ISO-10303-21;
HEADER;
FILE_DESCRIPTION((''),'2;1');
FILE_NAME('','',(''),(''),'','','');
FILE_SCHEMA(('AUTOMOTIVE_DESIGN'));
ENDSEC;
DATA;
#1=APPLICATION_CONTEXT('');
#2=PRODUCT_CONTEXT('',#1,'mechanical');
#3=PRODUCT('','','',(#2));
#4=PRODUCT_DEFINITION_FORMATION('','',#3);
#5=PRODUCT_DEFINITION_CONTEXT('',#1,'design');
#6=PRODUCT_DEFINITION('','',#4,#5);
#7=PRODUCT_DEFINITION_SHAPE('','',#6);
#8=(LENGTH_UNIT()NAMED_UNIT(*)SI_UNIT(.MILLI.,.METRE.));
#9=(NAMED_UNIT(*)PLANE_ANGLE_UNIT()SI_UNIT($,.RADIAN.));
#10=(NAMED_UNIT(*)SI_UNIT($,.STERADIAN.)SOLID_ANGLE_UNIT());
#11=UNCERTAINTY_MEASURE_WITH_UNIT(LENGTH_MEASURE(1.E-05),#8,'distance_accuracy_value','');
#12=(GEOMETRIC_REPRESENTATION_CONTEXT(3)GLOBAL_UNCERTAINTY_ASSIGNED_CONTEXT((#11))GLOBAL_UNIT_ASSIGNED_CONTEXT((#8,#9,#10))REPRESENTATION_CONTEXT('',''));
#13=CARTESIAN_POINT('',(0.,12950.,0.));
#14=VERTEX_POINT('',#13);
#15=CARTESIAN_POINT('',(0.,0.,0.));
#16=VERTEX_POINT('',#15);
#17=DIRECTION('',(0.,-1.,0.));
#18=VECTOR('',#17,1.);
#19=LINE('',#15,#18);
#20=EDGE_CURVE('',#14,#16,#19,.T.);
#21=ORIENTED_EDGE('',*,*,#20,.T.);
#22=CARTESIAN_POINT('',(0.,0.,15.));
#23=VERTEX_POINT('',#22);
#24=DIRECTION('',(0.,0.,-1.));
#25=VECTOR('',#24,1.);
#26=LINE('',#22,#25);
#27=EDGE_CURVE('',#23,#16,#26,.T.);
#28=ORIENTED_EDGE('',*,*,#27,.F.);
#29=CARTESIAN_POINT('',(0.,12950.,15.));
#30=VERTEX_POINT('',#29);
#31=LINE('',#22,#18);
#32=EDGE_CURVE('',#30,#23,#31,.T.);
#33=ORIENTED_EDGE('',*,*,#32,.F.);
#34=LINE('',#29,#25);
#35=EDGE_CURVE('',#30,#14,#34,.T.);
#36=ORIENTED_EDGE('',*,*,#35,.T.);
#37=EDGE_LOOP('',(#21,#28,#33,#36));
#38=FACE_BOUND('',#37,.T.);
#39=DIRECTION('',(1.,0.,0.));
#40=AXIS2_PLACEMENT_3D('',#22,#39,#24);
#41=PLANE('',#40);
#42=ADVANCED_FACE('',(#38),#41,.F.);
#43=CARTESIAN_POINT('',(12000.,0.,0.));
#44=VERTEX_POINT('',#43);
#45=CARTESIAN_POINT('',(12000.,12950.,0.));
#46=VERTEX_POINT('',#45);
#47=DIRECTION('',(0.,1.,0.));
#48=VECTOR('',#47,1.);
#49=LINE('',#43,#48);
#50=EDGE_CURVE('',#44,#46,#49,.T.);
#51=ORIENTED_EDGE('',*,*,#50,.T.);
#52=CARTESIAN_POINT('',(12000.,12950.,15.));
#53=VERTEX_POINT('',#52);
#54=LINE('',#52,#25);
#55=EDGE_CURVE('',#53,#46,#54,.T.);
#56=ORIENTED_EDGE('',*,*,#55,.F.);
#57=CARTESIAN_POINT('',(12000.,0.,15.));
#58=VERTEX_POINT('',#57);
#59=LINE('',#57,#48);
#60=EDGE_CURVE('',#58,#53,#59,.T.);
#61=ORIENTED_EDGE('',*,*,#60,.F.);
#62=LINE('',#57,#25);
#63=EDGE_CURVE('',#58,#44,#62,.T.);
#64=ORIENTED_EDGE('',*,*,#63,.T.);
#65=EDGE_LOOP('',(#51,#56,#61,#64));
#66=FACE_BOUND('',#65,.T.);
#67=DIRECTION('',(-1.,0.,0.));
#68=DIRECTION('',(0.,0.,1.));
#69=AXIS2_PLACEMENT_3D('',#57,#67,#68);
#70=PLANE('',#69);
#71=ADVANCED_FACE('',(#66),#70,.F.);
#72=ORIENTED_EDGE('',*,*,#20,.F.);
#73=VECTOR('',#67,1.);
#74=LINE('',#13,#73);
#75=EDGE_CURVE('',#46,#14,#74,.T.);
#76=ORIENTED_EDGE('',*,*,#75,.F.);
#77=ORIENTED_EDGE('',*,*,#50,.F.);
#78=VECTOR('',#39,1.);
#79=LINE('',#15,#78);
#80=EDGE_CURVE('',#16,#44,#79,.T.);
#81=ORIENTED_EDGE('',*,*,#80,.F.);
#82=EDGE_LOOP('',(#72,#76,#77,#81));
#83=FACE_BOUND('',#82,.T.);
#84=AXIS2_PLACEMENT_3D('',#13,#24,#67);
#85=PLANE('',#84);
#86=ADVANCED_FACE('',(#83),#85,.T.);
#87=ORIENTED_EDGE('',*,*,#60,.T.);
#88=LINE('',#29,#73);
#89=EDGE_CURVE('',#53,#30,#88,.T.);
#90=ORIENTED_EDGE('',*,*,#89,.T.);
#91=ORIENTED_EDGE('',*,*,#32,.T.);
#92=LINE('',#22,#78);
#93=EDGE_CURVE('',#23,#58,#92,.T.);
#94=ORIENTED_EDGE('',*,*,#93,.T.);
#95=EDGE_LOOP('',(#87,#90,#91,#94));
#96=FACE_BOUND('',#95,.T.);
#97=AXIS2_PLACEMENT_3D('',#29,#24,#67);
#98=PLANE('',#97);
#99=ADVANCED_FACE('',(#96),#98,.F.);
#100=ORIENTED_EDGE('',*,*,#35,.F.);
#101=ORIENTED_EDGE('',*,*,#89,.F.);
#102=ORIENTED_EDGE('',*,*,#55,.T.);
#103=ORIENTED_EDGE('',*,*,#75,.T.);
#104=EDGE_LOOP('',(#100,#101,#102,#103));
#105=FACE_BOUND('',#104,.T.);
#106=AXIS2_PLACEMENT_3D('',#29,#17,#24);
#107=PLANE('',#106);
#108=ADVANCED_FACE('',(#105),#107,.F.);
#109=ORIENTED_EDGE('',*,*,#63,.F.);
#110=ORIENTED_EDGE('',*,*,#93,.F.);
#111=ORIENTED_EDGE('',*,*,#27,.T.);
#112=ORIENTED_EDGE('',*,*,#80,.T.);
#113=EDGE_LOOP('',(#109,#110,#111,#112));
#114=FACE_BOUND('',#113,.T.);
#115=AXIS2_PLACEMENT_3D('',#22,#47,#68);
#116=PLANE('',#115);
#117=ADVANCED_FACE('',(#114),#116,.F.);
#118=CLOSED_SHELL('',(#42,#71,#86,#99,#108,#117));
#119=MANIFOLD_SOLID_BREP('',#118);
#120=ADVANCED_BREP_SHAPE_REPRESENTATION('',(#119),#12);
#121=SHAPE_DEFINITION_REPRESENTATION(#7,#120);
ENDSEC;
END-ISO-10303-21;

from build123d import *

# Parameters (mm, degrees)
SKETCH1_W          = 12000
SKETCH1_H          = 12950
BASE_FLANGE1_DEPTH = 15


# Sheet-metal steps are written as plain solids
with BuildPart() as part:
    # Sketch1 → Base-Flange1 (new body)
    with BuildSketch(Plane.XY):
        with Locations((6000, 6475)):
            Rectangle(SKETCH1_W, SKETCH1_H)
    extrude(amount=BASE_FLANGE1_DEPTH)


solid = part.part
